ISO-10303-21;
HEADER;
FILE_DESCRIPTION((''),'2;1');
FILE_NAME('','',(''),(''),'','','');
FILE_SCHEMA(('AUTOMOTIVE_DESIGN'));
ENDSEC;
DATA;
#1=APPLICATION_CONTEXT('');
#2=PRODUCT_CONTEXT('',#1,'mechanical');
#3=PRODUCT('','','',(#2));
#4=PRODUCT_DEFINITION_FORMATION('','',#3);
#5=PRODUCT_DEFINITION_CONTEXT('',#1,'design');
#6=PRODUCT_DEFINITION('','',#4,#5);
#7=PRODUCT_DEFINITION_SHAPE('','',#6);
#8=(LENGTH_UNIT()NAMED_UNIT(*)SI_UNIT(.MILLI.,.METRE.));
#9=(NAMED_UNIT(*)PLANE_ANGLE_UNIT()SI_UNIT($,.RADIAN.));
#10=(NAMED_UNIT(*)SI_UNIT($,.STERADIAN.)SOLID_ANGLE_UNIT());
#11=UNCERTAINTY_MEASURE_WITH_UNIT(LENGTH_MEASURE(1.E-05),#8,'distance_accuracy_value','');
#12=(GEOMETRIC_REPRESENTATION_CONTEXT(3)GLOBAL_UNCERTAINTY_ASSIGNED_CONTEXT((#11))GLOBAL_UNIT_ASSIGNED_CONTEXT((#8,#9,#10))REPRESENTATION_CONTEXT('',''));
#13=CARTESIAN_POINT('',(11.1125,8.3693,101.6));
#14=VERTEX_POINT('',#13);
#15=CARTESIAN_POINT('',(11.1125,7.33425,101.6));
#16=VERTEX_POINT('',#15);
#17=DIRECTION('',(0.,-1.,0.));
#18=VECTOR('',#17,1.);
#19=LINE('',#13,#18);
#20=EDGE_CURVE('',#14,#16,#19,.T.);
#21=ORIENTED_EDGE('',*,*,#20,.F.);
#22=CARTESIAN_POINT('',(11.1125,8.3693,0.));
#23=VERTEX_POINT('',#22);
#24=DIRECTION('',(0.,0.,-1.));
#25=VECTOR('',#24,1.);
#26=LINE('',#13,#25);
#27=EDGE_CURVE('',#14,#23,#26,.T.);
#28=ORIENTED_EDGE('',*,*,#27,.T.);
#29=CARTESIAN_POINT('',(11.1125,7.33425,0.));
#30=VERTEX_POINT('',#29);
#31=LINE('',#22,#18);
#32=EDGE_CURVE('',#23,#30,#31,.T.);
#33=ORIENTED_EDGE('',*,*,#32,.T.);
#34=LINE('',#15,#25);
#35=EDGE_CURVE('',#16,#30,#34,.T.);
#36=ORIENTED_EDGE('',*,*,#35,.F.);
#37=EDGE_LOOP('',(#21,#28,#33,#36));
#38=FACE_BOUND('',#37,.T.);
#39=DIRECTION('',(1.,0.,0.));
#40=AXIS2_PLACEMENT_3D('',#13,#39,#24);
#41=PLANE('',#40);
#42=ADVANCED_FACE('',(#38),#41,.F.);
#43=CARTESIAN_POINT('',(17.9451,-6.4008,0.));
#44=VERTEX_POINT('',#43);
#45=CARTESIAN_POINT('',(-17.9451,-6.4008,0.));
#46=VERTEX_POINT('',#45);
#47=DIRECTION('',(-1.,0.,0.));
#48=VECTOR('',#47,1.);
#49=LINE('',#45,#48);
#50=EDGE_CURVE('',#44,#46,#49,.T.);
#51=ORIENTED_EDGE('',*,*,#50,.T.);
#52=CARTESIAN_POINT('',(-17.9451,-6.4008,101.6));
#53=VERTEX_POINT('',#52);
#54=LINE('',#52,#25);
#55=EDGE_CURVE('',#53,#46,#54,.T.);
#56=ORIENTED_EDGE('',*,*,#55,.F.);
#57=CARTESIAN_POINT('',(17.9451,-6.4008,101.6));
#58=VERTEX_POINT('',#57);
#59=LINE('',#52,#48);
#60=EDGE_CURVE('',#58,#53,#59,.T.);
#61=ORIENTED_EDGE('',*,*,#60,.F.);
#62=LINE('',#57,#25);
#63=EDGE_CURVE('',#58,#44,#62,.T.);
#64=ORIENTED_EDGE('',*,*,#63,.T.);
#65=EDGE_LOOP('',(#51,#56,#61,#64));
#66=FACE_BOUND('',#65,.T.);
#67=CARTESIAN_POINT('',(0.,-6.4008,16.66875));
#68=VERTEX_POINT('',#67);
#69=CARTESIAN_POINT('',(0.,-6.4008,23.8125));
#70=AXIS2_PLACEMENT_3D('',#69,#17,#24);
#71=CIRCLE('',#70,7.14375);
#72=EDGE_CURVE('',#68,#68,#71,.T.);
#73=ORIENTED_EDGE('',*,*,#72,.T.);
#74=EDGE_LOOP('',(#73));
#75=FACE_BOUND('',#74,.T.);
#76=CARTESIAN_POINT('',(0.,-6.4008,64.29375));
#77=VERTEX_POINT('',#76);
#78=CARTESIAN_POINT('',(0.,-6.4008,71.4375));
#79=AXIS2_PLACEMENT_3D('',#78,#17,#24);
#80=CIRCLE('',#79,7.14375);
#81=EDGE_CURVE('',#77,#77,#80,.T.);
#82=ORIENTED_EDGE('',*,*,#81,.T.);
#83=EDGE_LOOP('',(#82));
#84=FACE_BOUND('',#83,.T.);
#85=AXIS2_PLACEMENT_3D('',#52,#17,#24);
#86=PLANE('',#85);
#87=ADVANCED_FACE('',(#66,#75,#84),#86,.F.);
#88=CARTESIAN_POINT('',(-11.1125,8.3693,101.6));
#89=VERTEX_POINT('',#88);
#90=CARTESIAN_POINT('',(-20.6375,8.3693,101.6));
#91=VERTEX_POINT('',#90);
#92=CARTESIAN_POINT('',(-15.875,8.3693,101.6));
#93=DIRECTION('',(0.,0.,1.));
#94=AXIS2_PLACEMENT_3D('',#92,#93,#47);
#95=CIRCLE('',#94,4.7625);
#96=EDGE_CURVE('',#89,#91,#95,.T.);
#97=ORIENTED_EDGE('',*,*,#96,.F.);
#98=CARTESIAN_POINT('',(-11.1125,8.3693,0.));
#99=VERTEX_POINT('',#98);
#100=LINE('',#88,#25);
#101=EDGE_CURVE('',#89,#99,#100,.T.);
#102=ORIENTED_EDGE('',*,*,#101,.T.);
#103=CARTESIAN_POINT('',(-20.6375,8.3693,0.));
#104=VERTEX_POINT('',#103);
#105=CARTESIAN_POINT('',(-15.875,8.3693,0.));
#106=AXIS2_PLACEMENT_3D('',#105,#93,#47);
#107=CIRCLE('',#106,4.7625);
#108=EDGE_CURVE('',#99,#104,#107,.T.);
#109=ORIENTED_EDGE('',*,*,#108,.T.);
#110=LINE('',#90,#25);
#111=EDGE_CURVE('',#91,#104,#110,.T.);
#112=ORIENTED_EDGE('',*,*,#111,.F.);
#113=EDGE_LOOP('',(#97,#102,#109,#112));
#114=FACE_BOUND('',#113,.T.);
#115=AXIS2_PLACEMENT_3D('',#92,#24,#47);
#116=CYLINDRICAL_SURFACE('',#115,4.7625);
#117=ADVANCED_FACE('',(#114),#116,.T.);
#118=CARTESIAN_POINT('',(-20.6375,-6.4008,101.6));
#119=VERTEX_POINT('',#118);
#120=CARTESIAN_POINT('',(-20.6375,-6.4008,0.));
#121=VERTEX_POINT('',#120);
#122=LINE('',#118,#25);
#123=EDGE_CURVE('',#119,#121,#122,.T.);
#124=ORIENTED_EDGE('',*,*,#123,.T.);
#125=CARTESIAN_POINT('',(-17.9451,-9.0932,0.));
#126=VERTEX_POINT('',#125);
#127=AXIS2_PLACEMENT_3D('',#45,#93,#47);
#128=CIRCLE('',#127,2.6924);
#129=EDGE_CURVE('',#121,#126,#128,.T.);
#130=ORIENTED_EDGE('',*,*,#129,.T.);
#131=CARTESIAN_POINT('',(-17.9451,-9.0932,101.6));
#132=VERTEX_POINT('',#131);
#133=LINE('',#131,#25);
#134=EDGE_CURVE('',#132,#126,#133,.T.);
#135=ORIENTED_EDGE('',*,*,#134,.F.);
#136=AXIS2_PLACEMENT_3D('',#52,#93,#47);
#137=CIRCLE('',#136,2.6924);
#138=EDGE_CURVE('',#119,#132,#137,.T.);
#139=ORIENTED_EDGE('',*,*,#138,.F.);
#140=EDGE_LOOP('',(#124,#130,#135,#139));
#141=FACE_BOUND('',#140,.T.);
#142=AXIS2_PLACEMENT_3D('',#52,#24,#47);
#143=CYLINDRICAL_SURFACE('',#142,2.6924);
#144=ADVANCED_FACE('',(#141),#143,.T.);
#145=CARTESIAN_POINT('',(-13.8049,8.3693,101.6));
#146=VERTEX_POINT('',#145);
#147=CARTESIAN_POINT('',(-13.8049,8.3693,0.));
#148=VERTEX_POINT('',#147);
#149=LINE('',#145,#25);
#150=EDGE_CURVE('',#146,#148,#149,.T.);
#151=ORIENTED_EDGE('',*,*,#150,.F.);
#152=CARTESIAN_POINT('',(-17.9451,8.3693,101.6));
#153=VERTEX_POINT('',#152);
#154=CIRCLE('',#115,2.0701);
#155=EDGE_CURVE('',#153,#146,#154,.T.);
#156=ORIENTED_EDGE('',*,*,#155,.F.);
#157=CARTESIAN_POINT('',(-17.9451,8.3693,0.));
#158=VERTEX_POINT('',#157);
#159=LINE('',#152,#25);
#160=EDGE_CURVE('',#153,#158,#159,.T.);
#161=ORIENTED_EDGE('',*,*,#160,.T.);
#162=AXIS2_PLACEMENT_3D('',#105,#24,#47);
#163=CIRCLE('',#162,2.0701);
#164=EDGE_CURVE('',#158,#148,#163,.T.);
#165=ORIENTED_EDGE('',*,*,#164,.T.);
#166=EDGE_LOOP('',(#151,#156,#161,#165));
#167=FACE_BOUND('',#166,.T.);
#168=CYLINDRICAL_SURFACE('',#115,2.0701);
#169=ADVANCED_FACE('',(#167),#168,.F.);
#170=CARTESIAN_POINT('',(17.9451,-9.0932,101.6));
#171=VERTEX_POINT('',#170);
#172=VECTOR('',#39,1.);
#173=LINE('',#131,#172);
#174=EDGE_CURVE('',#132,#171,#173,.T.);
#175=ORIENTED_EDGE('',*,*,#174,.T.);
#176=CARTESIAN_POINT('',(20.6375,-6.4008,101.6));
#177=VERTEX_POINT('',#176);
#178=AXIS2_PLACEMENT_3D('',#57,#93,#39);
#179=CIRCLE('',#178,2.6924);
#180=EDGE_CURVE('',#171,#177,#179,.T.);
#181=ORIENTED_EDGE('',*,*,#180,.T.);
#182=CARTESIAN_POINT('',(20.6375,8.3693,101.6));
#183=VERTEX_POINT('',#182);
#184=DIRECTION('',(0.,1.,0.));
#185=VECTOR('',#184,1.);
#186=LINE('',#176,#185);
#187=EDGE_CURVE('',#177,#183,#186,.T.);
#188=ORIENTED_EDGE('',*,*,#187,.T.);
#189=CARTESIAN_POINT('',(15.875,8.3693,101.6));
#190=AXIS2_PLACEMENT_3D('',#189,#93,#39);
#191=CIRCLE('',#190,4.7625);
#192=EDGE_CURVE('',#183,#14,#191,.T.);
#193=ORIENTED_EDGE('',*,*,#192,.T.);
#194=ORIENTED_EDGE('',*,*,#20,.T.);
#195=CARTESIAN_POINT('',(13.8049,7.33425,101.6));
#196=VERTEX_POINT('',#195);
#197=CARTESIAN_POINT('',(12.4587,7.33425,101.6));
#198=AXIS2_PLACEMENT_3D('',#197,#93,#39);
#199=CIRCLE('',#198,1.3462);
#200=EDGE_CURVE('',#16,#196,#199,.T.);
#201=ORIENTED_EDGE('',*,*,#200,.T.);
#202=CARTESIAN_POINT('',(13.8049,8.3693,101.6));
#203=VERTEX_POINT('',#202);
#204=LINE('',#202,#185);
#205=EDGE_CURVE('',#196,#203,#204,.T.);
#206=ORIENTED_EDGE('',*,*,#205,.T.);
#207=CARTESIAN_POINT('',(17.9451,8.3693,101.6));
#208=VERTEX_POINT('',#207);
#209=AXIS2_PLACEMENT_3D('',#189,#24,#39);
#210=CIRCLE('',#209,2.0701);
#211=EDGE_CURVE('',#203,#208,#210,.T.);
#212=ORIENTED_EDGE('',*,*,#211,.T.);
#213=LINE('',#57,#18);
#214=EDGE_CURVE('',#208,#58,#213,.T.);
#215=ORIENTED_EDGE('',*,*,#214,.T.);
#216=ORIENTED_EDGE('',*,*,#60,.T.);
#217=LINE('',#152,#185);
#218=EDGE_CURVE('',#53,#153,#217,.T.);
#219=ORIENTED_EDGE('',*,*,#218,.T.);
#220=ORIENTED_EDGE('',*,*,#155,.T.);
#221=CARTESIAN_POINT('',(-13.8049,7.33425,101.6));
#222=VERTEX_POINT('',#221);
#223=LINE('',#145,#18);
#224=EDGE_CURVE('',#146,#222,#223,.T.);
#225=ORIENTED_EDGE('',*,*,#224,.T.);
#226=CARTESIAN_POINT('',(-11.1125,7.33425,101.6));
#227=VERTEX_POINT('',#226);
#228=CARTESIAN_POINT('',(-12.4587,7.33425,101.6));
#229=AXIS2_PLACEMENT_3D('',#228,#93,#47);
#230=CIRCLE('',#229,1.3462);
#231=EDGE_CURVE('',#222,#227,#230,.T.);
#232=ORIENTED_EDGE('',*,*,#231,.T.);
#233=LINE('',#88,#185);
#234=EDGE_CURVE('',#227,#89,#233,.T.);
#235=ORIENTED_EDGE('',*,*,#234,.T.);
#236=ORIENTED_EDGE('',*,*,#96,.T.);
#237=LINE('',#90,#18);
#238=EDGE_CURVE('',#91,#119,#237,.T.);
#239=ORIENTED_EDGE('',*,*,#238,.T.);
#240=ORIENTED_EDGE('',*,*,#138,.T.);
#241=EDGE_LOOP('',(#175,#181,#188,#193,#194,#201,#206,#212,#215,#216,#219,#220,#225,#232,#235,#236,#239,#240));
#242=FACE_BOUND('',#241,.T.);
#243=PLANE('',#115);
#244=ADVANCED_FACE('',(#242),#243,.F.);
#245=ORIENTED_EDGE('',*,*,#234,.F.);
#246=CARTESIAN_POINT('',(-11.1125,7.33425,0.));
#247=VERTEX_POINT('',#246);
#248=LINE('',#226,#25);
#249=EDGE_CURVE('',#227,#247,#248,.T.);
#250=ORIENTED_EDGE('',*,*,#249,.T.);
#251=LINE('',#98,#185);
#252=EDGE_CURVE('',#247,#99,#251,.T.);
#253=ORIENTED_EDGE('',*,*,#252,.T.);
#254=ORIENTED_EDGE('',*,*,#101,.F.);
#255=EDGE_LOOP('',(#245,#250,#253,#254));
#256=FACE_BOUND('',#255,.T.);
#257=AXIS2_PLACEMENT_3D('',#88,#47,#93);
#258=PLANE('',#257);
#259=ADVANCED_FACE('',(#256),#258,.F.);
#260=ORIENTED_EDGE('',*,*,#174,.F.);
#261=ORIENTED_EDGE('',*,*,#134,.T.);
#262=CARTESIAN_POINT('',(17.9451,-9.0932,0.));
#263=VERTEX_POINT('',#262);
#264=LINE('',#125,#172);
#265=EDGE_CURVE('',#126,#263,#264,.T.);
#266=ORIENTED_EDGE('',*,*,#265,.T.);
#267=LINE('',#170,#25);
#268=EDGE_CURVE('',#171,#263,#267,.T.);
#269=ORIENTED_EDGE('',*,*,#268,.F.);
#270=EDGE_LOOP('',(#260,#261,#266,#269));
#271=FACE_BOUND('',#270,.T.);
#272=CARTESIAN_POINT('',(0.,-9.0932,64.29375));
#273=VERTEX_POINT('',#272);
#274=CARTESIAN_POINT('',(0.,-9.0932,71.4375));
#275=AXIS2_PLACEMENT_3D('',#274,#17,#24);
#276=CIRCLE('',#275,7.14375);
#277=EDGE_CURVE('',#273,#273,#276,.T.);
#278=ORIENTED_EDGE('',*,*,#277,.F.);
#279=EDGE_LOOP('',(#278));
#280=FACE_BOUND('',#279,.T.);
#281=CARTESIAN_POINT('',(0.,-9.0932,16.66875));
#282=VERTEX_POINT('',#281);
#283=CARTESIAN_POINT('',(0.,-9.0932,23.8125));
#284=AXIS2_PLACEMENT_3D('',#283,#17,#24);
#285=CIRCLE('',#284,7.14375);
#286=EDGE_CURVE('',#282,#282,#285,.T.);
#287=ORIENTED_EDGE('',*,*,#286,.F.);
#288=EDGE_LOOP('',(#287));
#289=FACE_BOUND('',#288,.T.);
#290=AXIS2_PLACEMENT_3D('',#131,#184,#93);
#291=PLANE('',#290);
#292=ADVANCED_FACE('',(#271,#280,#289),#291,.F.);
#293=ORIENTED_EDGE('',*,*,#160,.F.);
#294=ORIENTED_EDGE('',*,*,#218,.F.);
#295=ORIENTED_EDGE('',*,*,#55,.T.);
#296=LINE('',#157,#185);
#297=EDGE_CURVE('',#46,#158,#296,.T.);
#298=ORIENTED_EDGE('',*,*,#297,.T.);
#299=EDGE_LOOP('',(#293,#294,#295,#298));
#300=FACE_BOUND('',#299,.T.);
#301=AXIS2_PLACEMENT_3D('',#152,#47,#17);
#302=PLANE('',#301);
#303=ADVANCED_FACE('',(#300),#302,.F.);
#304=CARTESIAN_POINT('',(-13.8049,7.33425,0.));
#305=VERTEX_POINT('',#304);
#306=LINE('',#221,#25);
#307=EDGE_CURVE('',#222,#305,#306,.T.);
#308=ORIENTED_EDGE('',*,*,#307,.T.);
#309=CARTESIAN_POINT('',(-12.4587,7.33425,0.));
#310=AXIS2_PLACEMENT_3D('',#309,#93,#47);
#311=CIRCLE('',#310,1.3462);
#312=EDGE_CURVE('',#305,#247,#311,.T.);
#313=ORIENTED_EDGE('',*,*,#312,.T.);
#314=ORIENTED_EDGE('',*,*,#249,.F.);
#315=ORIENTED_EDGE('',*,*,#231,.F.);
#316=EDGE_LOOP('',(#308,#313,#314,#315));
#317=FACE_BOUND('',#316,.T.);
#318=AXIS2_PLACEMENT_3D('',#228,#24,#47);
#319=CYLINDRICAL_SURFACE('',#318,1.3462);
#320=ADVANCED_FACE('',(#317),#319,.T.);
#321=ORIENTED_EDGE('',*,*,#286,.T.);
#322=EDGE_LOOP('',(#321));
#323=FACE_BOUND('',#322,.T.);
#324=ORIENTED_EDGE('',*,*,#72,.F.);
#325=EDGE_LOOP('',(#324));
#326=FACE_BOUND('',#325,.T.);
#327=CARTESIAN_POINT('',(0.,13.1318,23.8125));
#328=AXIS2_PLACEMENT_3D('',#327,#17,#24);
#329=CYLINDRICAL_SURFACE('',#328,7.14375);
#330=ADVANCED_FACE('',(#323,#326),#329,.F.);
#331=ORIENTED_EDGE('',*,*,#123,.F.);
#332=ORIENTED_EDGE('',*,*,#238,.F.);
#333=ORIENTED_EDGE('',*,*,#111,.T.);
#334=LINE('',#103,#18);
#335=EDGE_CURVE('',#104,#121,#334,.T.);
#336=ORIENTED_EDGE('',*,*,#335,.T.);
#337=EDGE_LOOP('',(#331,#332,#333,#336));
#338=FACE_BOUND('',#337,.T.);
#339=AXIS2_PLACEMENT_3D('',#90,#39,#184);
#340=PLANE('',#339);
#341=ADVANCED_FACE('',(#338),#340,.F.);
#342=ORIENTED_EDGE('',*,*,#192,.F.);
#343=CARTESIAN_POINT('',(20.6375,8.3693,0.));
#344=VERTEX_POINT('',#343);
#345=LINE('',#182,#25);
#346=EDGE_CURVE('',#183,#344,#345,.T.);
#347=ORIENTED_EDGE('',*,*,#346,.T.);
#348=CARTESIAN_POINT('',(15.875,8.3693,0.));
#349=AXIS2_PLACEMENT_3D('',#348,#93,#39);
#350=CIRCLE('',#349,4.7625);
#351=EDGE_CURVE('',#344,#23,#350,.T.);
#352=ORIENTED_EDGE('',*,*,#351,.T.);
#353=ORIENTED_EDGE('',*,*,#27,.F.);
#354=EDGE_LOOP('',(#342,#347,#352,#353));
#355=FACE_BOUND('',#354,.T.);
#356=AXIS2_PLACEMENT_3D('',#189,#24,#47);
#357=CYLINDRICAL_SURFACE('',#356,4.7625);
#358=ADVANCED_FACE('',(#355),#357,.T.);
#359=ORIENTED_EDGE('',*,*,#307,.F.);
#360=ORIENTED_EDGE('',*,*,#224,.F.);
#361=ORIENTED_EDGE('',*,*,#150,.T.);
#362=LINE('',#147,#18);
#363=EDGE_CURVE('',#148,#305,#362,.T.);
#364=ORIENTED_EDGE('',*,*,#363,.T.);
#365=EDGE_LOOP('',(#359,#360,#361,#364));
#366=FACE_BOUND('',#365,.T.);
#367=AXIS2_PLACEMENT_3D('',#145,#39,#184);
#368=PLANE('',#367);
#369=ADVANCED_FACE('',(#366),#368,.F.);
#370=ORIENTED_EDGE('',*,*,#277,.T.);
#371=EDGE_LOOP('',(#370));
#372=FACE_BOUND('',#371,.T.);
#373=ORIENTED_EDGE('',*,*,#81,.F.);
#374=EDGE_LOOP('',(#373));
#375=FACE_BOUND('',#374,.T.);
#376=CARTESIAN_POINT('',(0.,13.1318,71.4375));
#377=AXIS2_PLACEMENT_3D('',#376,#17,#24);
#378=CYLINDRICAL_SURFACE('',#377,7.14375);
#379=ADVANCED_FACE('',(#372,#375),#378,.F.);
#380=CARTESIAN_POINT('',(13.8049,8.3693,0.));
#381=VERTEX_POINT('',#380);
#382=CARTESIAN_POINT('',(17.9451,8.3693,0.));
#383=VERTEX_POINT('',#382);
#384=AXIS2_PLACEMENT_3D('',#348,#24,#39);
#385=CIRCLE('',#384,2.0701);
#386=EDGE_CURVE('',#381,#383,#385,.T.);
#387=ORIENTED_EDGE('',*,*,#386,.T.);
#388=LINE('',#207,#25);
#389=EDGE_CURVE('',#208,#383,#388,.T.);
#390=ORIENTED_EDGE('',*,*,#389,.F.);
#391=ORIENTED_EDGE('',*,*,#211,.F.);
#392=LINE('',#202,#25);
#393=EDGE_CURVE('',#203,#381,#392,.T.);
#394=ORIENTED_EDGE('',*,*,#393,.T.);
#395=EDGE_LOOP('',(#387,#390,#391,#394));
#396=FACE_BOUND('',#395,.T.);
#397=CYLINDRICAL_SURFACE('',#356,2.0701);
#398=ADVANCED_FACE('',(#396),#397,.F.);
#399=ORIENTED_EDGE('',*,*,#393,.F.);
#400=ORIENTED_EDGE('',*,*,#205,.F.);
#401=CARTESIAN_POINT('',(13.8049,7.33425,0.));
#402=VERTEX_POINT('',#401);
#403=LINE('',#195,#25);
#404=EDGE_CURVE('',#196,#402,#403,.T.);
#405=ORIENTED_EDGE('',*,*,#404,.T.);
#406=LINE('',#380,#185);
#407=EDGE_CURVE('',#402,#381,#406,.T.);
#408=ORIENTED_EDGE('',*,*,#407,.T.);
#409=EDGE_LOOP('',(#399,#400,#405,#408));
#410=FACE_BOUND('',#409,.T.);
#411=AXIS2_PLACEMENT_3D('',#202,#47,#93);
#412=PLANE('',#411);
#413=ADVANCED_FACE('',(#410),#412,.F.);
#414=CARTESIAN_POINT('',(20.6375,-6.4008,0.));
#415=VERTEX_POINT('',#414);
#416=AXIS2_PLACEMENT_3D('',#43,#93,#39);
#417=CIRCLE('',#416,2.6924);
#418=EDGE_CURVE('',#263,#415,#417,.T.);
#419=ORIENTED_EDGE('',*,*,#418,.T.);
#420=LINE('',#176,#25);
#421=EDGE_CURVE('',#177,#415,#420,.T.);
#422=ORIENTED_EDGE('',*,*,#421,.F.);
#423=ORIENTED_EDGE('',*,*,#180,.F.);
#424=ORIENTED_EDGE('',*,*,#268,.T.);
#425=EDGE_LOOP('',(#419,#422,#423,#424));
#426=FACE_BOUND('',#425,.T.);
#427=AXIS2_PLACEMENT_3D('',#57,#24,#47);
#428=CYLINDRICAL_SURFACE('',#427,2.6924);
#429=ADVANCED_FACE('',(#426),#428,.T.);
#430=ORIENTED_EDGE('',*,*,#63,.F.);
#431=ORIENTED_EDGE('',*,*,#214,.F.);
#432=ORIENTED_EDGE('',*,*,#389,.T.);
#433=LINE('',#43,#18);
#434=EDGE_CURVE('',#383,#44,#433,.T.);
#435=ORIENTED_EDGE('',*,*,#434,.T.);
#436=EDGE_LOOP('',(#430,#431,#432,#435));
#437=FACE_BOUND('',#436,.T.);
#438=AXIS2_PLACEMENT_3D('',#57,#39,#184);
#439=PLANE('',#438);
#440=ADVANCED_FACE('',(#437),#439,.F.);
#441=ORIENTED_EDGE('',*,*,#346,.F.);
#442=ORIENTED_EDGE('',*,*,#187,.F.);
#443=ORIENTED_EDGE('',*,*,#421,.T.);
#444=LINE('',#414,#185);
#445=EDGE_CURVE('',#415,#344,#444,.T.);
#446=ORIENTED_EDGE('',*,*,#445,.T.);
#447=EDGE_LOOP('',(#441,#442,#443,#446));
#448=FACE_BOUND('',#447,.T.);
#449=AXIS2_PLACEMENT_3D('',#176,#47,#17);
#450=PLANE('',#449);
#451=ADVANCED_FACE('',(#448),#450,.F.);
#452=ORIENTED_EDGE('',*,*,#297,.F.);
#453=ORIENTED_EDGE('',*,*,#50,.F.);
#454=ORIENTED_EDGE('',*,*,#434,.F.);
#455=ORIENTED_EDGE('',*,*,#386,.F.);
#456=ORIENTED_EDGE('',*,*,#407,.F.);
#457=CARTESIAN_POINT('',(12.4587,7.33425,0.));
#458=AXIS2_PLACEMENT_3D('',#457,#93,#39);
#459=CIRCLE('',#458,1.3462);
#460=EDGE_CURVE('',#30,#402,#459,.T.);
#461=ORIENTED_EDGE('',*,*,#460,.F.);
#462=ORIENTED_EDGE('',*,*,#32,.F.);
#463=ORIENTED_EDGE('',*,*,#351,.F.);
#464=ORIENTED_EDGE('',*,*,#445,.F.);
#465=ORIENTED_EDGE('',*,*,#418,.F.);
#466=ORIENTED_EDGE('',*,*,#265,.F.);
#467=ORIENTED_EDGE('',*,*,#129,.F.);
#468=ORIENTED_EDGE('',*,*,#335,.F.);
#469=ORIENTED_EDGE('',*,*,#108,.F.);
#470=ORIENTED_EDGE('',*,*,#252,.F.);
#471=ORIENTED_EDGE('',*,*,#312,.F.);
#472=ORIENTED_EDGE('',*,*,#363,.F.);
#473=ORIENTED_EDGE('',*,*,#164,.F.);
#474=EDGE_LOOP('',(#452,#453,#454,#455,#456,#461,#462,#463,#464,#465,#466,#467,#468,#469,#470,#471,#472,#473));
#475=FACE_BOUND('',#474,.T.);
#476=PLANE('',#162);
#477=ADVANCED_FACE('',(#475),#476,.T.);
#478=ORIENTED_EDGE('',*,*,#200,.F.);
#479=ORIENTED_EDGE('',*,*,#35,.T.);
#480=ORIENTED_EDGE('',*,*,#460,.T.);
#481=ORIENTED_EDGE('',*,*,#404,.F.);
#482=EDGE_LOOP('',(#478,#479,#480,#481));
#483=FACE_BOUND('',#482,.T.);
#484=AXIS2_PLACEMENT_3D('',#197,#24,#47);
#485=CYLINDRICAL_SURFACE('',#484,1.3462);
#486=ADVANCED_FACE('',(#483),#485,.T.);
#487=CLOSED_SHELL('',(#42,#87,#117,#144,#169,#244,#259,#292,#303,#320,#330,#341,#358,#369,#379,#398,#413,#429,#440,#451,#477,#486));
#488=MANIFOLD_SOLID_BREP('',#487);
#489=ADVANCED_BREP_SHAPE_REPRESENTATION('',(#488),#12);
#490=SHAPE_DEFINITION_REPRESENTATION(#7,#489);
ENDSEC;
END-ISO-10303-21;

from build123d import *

# Parameters (mm, degrees)
BASE_EXTRUDE_DEPTH = 101.6
HOLE1_START        = -9.0932
HOLE1_OUTLINE_R    = 7.14375
HOLE1_DEPTH        = 2.6924
LPATTERN2_COUNT    = 2
LPATTERN2_PITCH    = 47.625


# Read off the part's stored shape, not the designer's step: Hole1
with BuildPart() as part:
    # Sketch1 → Base-Extrude (new body)
    with BuildSketch(Plane.XY):
        with BuildLine():
            Line((-20.6375, 8.3693), (-20.6375, -6.4008))
            ThreePointArc((-20.6375, -6.4008), (-19.848914298, -8.304614298), (-17.9451, -9.0932))
            Line((-17.9451, -9.0932), (17.9451, -9.0932))
            ThreePointArc((17.9451, -9.0932), (19.848914298, -8.304614298), (20.6375, -6.4008))
            Line((20.6375, -6.4008), (20.6375, 8.3693))
            ThreePointArc((20.6375, 8.3693), (15.875, 13.1318), (11.1125, 8.3693))
            Line((11.1125, 8.3693), (11.1125, 7.33425))
            ThreePointArc((11.1125, 7.33425), (12.4587, 5.98805), (13.8049, 7.33425))
            Line((13.8049, 7.33425), (13.8049, 8.3693))
            ThreePointArc((13.8049, 8.3693), (15.875, 10.4394), (17.9451, 8.3693))
            Line((17.9451, 8.3693), (17.9451, -6.4008))
            Line((17.9451, -6.4008), (-17.9451, -6.4008))
            Line((-17.9451, -6.4008), (-17.9451, 8.3693))
            ThreePointArc((-17.9451, 8.3693), (-15.875, 10.4394), (-13.8049, 8.3693))
            Line((-13.8049, 8.3693), (-13.8049, 7.33425))
            ThreePointArc((-13.8049, 7.33425), (-12.4587, 5.98805), (-11.1125, 7.33425))
            Line((-11.1125, 7.33425), (-11.1125, 8.3693))
            ThreePointArc((-11.1125, 8.3693), (-15.875, 13.1318), (-20.6375, 8.3693))
        make_face()
    extrude(amount=BASE_EXTRUDE_DEPTH)

    # Hole1 outline → Hole1 (cut)
    with BuildSketch(Plane(origin=(0, 0, 0), x_dir=(1, 0, 0), z_dir=(0, 1, 0)).offset(HOLE1_START)):
        with Locations((0, -23.8125)):
            Circle(HOLE1_OUTLINE_R)
    hole1 = extrude(amount=HOLE1_DEPTH, mode=Mode.SUBTRACT)

    # LPattern2: Hole1 ×2
    with Locations(*[(0, 0, i * LPATTERN2_PITCH) for i in range(1, LPATTERN2_COUNT)]):
        add(hole1, mode=Mode.SUBTRACT)


solid = part.part
